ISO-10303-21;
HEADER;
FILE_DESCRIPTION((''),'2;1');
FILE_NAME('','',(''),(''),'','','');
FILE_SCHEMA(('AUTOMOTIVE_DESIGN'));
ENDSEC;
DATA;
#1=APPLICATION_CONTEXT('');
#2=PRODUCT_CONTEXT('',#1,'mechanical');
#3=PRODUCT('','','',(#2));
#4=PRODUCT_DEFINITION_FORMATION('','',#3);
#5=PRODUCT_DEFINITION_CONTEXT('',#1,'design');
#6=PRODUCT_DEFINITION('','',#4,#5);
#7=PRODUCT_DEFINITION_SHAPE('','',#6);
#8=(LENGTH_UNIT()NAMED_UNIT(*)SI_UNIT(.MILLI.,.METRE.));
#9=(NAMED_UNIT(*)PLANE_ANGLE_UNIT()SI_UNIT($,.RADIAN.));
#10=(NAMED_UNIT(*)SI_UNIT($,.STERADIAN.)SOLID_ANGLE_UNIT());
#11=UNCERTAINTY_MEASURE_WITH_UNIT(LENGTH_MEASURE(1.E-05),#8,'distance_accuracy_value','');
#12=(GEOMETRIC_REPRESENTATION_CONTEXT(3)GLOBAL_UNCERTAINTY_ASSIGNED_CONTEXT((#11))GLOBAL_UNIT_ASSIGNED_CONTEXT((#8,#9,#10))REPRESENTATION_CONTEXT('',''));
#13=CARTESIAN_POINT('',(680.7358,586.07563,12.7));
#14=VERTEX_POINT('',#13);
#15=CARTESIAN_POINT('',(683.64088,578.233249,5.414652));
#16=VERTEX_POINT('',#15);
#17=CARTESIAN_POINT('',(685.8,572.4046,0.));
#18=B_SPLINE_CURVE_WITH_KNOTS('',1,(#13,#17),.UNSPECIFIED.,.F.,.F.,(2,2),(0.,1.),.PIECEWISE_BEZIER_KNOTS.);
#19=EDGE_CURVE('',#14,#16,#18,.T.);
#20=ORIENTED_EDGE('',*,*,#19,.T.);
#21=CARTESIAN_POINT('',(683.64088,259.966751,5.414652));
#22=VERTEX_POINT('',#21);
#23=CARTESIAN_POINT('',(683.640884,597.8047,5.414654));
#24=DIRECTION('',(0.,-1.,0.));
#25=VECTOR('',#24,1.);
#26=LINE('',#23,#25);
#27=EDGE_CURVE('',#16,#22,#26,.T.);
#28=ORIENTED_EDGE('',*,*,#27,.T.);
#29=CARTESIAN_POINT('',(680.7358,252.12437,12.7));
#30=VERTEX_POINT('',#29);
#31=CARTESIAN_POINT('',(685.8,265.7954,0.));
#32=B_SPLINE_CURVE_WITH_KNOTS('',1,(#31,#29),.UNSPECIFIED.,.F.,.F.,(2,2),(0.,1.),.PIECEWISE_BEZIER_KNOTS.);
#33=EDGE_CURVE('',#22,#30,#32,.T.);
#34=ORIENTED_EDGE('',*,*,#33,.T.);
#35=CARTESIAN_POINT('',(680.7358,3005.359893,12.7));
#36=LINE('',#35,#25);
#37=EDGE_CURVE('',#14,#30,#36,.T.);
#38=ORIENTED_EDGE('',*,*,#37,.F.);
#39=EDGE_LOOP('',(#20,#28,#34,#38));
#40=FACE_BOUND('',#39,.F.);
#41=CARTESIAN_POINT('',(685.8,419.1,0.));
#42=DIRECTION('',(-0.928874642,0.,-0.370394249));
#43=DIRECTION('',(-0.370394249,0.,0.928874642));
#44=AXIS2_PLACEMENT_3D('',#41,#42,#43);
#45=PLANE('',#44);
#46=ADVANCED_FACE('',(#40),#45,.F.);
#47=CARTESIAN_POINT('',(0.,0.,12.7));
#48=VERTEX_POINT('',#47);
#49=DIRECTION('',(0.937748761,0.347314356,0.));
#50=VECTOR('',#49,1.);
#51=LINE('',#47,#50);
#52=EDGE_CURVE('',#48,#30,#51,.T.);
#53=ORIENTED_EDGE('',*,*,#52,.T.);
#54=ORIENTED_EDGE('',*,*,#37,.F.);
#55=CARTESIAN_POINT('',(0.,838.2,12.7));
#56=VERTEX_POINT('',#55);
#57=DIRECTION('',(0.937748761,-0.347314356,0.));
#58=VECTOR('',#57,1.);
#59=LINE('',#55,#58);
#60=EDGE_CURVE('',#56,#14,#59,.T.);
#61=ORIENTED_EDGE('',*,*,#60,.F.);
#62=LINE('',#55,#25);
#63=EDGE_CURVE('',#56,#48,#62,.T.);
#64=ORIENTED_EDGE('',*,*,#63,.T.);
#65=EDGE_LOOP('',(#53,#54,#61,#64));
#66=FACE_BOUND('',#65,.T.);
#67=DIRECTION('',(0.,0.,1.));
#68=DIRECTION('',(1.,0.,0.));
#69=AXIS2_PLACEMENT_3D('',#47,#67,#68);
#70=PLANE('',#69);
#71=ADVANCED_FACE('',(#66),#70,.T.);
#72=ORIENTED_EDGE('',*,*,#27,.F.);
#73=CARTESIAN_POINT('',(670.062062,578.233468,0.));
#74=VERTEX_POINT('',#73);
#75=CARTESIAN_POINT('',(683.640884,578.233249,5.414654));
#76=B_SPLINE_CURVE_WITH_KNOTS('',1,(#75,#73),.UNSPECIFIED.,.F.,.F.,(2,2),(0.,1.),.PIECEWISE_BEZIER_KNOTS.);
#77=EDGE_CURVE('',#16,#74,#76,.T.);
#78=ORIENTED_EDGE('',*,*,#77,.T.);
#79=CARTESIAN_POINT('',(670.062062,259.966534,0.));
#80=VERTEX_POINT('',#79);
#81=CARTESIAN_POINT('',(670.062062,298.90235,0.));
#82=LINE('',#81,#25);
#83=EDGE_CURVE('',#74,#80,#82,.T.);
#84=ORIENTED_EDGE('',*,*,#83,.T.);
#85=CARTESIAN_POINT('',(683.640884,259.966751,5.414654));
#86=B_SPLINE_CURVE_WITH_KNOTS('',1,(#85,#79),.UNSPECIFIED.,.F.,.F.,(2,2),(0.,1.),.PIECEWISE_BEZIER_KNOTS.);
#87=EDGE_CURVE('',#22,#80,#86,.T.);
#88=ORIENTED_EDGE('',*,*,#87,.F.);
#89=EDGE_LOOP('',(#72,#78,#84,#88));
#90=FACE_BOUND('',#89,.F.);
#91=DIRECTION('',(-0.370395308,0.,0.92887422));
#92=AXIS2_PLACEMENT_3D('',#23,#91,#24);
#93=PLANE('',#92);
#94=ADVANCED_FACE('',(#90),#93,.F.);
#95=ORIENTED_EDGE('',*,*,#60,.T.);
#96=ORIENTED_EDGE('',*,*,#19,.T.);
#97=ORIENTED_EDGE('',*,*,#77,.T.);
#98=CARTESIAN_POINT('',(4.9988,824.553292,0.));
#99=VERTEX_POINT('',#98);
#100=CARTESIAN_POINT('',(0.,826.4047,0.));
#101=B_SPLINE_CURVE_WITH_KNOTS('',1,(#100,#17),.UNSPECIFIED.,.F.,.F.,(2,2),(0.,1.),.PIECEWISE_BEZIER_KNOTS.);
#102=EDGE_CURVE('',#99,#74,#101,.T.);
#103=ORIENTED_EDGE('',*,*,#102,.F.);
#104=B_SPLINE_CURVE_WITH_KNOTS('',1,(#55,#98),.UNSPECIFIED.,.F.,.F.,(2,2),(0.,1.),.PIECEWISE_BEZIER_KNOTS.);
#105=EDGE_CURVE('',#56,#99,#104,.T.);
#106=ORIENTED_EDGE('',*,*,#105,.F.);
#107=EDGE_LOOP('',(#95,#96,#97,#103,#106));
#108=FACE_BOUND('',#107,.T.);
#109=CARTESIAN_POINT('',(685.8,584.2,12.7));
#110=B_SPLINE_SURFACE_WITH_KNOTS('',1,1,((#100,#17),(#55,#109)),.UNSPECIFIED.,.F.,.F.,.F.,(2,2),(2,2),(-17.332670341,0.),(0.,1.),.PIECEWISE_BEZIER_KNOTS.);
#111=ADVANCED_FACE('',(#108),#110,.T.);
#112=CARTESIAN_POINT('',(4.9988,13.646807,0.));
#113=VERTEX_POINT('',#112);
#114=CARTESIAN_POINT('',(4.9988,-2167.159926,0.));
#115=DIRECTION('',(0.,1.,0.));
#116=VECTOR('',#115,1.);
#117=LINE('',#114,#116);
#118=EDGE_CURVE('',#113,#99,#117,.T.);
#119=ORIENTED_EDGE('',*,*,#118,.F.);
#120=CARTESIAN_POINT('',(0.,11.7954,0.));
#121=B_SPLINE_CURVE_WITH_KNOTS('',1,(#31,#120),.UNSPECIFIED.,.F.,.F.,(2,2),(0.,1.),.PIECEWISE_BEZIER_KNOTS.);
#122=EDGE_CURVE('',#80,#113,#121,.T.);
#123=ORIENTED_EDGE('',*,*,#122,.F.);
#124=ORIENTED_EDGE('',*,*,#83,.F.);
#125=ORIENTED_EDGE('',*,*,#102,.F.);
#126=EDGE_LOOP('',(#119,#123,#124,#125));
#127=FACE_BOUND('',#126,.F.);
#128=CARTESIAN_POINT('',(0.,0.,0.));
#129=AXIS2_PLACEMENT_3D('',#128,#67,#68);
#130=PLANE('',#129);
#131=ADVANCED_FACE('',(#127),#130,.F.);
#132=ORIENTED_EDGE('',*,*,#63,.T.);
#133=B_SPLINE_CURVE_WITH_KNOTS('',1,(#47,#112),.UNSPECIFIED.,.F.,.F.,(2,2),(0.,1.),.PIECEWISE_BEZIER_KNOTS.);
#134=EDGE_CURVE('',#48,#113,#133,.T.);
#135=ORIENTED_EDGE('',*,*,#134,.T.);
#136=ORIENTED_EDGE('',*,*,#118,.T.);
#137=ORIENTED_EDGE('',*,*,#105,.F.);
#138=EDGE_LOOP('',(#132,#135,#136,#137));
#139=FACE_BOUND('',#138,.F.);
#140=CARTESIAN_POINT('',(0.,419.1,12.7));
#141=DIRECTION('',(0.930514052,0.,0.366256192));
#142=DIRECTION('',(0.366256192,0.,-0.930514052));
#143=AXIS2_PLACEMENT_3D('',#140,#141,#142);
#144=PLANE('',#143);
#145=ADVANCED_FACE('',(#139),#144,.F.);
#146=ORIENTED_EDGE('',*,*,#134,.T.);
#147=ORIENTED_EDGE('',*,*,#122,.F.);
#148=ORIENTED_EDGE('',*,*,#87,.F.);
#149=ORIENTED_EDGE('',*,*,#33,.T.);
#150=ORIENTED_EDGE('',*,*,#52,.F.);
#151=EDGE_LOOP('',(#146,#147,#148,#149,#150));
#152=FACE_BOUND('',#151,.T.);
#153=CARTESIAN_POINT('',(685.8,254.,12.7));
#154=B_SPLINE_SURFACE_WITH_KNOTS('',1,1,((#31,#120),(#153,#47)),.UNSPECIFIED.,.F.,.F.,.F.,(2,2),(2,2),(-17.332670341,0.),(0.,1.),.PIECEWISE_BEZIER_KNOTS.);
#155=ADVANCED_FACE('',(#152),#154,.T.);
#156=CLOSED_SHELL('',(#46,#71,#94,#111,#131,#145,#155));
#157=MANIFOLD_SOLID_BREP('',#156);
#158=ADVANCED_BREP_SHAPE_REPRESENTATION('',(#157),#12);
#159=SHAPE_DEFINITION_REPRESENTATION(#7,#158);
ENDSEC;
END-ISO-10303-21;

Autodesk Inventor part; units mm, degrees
ref_plane "YZ Plane" through (0, 0, 0) normal (1, 0, 0) x (0, 1, 0)
sketch "Sketch1" plane through (0, 0, 0) normal (0, 0, 1) x (1, 0, 0)
  line L0 (0, 0) -> (685.8, 0)
  line L1 (685.8, 0) -> (685.8, 838.2)
  line L2 (685.8, 838.2) -> (0, 838.2)
  line L3 (0, 838.2) -> (0, 0)
  line L4 (685.8, 254) -> (787.4, 254) construction
  line L5 (787.4, 254) -> (787.4, 584.2) construction
  line L6 (787.4, 584.2) -> (685.8, 584.2) construction
  line L7 (0, 838.2) -> (685.8, 584.2)
  line L8 (0, 0) -> (685.8, 254)
  dimension "d0" = 685.8
  dimension "d1" = 838.2
  dimension "d2" = 101.6
  dimension "d3" = 330.2
  dimension "d4" = 254
extrude "Extrusion1" add sketch "Sketch1" along normal blind 12.7 contours L3 L7 L1 L8
sketch "Sketch2" plane through (0, 0, 0) normal (-1, 0, 0) x (0, 0, 1)
  line L0 (12.7, 838.2) -> (12.7, 0) projected
  line L1 (12.7, 0) -> (0, 11.7954)
  line L2 (0, 838.2) -> (0, 0) projected
  line L3 (12.7, 0) -> (30.0327, 0) construction
  line L4 (12.7, 838.2) -> (0, 825.5)
  line L5 (12.7, 838.2) -> (30.6605, 838.2) construction
  line L6 (0, 838.2) -> (12.7, 838.2) projected
  line L7 (12.7, 838.2) -> (0, 838.2)
  line L8 (0, 838.2) -> (0, 825.5)
  line L9 (0, 0) -> (12.7, 0) projected
  line L10 (12.7, 0) -> (0, 0)
  line L11 (0, 0) -> (0, 11.7954)
  dimension "d7" = 137.115
  dimension "d8" = 135
sketch "Sketch3" plane through (685.8, 254, 0) normal (1, 0, 0) x (0, 0, -1)
  line L0 (-12.7, -254) -> (-12.7, 0) projected
  line L1 (-12.7, 0) -> (0, 11.7954)
  line L2 (0, 0) -> (0, 330.2) projected
  line L3 (-12.7, 0) -> (4.6327, 0) construction
  line L4 (0, 11.7954) -> (0, 0)
  line L5 (0, 0) -> (-12.7, 0)
  line L6 (-12.7, 0) -> (-12.7, 330.2) projected
  line L7 (-12.7, 330.2) -> (0, 316.526)
  line L8 (0, 316.526) -> (0, 330.2)
  line L9 (0, 330.2) -> (-12.7, 330.2)
  point P0 (0, -254)
  dimension "d9" = 42.885
loft "Loft1" cut profiles "Sketch3", "Sketch2" contours L1 L2 L5 / L9 L2 L1
sketch "Sketch4" plane through (685.8, 584.2, 12.7) normal (1, 0, 0) x (0, 0, -1)
  line L0 (0, 0) -> (0, 254) projected
  line L1 (0, 0) -> (12.7, -11.7954)
  line L2 (12.7, -318.4046) -> (12.7, 0) projected
  line L3 (0, 0) -> (17.3327, 0) construction
  line L4 (12.7, -11.7954) -> (12.7, 0)
  line L5 (12.7, 0) -> (0, 0)
  point P0 (12.7, -584.2)
  dimension "d14" = 42.885
sketch "Sketch5" plane through (0, 11.7954, 0) normal (-1, 0, 0) x (0, 0, 1)
  line L0 (0, 826.4046) -> (12.7, 826.4046) projected
  line L1 (12.7, 826.4046) -> (0, 814.6093)
  line L2 (0, 572.4046) -> (0, 826.4046) projected
  line L3 (12.7, 826.4046) -> (30.0327, 826.4046) construction
  line L4 (0, 814.6093) -> (0, 826.4046)
  line L5 (0, 826.4046) -> (12.7, 826.4046)
  point P0 (0, -11.7954)
  dimension "d15" = 137.115
loft "Loft2" cut profiles "Sketch5", "Sketch4"
ref_plane "Work Plane1" through (685.8, 0, 0) normal (0.923076, 0, -0.3846176) x (0, 1, 0)
ref_plane "Work Plane2" through (0, 419.1, 0) normal (0, 1, 0) x (-1, 0, 0)
sketch "Sketch7" plane through (0, 419.1, 0) normal (0, 1, 0) x (-1, 0, 0)
  line L0 (-685.8, 0) -> (0, 0) projected
  line L1 (-685.8, 0) -> (-680.7358, 12.7)
  line L2 (0, 12.7) -> (-685.8, 12.7) projected
  line L3 (-685.8, 0) -> (-672.1275, 0) construction
  line L4 (-680.7358, 12.7) -> (-685.8, 12.7)
  line L5 (-685.8, 12.7) -> (-685.8, 0)
  dimension "d26" = 68.26
extrude "Extrusion3" cut sketch "Sketch7" against normal through all both and the other way through all
sketch "Sketch8" plane through (0, 419.1, 0) normal (0, 1, 0) x (-1, 0, 0)
  line L0 (-685.8, 0) -> (0, 0) projected
  line L1 (0, 0) -> (14.0129, 0) construction
  line L2 (0, 12.7) -> (-680.7358, 12.7) projected
  line L3 (0, 12.7) -> (-4.9988, 0)
  line L4 (0, 12.7) -> (13.6484, 12.7) construction
  line L5 (-4.9988, 0) -> (0, 0)
  line L6 (0, 12.7) -> (0, 0)
  dimension "d32" = 111.485
extrude "Extrusion4" cut sketch "Sketch8" against normal through all both and the other way through all
sketch "Sketch10" plane through (680.7358, 252.1244, 12.7) normal (0.9288742, 0, 0.3703953) x (0.3703953, 0, -0.9288742)
  line L0 (13.6725, 13.671) -> (13.6725, 320.2803) projected
  line L1 (13.6725, 345.6803) -> (7.8432, 345.6803)
  line L2 (7.8432, 345.6803) -> (7.8432, -11.729)
  line L3 (7.8432, -11.729) -> (13.6725, -11.729)
  line L4 (13.6725, -11.729) -> (13.6725, 345.6803)
  point P0 (-240.3446, -252.1244)
  point P1 (13.6725, 13.671)
  point P2 (13.6725, 320.2803)
  dimension "d37" = 5.8293
  dimension "d38" = 25.4
  dimension "d39" = 25.4
extrude "Extrusion6" cut sketch "Sketch10" against normal through all
properties part number "Wind Tunnel Inlet Body Single Panel" material "Wood (Oak)"
